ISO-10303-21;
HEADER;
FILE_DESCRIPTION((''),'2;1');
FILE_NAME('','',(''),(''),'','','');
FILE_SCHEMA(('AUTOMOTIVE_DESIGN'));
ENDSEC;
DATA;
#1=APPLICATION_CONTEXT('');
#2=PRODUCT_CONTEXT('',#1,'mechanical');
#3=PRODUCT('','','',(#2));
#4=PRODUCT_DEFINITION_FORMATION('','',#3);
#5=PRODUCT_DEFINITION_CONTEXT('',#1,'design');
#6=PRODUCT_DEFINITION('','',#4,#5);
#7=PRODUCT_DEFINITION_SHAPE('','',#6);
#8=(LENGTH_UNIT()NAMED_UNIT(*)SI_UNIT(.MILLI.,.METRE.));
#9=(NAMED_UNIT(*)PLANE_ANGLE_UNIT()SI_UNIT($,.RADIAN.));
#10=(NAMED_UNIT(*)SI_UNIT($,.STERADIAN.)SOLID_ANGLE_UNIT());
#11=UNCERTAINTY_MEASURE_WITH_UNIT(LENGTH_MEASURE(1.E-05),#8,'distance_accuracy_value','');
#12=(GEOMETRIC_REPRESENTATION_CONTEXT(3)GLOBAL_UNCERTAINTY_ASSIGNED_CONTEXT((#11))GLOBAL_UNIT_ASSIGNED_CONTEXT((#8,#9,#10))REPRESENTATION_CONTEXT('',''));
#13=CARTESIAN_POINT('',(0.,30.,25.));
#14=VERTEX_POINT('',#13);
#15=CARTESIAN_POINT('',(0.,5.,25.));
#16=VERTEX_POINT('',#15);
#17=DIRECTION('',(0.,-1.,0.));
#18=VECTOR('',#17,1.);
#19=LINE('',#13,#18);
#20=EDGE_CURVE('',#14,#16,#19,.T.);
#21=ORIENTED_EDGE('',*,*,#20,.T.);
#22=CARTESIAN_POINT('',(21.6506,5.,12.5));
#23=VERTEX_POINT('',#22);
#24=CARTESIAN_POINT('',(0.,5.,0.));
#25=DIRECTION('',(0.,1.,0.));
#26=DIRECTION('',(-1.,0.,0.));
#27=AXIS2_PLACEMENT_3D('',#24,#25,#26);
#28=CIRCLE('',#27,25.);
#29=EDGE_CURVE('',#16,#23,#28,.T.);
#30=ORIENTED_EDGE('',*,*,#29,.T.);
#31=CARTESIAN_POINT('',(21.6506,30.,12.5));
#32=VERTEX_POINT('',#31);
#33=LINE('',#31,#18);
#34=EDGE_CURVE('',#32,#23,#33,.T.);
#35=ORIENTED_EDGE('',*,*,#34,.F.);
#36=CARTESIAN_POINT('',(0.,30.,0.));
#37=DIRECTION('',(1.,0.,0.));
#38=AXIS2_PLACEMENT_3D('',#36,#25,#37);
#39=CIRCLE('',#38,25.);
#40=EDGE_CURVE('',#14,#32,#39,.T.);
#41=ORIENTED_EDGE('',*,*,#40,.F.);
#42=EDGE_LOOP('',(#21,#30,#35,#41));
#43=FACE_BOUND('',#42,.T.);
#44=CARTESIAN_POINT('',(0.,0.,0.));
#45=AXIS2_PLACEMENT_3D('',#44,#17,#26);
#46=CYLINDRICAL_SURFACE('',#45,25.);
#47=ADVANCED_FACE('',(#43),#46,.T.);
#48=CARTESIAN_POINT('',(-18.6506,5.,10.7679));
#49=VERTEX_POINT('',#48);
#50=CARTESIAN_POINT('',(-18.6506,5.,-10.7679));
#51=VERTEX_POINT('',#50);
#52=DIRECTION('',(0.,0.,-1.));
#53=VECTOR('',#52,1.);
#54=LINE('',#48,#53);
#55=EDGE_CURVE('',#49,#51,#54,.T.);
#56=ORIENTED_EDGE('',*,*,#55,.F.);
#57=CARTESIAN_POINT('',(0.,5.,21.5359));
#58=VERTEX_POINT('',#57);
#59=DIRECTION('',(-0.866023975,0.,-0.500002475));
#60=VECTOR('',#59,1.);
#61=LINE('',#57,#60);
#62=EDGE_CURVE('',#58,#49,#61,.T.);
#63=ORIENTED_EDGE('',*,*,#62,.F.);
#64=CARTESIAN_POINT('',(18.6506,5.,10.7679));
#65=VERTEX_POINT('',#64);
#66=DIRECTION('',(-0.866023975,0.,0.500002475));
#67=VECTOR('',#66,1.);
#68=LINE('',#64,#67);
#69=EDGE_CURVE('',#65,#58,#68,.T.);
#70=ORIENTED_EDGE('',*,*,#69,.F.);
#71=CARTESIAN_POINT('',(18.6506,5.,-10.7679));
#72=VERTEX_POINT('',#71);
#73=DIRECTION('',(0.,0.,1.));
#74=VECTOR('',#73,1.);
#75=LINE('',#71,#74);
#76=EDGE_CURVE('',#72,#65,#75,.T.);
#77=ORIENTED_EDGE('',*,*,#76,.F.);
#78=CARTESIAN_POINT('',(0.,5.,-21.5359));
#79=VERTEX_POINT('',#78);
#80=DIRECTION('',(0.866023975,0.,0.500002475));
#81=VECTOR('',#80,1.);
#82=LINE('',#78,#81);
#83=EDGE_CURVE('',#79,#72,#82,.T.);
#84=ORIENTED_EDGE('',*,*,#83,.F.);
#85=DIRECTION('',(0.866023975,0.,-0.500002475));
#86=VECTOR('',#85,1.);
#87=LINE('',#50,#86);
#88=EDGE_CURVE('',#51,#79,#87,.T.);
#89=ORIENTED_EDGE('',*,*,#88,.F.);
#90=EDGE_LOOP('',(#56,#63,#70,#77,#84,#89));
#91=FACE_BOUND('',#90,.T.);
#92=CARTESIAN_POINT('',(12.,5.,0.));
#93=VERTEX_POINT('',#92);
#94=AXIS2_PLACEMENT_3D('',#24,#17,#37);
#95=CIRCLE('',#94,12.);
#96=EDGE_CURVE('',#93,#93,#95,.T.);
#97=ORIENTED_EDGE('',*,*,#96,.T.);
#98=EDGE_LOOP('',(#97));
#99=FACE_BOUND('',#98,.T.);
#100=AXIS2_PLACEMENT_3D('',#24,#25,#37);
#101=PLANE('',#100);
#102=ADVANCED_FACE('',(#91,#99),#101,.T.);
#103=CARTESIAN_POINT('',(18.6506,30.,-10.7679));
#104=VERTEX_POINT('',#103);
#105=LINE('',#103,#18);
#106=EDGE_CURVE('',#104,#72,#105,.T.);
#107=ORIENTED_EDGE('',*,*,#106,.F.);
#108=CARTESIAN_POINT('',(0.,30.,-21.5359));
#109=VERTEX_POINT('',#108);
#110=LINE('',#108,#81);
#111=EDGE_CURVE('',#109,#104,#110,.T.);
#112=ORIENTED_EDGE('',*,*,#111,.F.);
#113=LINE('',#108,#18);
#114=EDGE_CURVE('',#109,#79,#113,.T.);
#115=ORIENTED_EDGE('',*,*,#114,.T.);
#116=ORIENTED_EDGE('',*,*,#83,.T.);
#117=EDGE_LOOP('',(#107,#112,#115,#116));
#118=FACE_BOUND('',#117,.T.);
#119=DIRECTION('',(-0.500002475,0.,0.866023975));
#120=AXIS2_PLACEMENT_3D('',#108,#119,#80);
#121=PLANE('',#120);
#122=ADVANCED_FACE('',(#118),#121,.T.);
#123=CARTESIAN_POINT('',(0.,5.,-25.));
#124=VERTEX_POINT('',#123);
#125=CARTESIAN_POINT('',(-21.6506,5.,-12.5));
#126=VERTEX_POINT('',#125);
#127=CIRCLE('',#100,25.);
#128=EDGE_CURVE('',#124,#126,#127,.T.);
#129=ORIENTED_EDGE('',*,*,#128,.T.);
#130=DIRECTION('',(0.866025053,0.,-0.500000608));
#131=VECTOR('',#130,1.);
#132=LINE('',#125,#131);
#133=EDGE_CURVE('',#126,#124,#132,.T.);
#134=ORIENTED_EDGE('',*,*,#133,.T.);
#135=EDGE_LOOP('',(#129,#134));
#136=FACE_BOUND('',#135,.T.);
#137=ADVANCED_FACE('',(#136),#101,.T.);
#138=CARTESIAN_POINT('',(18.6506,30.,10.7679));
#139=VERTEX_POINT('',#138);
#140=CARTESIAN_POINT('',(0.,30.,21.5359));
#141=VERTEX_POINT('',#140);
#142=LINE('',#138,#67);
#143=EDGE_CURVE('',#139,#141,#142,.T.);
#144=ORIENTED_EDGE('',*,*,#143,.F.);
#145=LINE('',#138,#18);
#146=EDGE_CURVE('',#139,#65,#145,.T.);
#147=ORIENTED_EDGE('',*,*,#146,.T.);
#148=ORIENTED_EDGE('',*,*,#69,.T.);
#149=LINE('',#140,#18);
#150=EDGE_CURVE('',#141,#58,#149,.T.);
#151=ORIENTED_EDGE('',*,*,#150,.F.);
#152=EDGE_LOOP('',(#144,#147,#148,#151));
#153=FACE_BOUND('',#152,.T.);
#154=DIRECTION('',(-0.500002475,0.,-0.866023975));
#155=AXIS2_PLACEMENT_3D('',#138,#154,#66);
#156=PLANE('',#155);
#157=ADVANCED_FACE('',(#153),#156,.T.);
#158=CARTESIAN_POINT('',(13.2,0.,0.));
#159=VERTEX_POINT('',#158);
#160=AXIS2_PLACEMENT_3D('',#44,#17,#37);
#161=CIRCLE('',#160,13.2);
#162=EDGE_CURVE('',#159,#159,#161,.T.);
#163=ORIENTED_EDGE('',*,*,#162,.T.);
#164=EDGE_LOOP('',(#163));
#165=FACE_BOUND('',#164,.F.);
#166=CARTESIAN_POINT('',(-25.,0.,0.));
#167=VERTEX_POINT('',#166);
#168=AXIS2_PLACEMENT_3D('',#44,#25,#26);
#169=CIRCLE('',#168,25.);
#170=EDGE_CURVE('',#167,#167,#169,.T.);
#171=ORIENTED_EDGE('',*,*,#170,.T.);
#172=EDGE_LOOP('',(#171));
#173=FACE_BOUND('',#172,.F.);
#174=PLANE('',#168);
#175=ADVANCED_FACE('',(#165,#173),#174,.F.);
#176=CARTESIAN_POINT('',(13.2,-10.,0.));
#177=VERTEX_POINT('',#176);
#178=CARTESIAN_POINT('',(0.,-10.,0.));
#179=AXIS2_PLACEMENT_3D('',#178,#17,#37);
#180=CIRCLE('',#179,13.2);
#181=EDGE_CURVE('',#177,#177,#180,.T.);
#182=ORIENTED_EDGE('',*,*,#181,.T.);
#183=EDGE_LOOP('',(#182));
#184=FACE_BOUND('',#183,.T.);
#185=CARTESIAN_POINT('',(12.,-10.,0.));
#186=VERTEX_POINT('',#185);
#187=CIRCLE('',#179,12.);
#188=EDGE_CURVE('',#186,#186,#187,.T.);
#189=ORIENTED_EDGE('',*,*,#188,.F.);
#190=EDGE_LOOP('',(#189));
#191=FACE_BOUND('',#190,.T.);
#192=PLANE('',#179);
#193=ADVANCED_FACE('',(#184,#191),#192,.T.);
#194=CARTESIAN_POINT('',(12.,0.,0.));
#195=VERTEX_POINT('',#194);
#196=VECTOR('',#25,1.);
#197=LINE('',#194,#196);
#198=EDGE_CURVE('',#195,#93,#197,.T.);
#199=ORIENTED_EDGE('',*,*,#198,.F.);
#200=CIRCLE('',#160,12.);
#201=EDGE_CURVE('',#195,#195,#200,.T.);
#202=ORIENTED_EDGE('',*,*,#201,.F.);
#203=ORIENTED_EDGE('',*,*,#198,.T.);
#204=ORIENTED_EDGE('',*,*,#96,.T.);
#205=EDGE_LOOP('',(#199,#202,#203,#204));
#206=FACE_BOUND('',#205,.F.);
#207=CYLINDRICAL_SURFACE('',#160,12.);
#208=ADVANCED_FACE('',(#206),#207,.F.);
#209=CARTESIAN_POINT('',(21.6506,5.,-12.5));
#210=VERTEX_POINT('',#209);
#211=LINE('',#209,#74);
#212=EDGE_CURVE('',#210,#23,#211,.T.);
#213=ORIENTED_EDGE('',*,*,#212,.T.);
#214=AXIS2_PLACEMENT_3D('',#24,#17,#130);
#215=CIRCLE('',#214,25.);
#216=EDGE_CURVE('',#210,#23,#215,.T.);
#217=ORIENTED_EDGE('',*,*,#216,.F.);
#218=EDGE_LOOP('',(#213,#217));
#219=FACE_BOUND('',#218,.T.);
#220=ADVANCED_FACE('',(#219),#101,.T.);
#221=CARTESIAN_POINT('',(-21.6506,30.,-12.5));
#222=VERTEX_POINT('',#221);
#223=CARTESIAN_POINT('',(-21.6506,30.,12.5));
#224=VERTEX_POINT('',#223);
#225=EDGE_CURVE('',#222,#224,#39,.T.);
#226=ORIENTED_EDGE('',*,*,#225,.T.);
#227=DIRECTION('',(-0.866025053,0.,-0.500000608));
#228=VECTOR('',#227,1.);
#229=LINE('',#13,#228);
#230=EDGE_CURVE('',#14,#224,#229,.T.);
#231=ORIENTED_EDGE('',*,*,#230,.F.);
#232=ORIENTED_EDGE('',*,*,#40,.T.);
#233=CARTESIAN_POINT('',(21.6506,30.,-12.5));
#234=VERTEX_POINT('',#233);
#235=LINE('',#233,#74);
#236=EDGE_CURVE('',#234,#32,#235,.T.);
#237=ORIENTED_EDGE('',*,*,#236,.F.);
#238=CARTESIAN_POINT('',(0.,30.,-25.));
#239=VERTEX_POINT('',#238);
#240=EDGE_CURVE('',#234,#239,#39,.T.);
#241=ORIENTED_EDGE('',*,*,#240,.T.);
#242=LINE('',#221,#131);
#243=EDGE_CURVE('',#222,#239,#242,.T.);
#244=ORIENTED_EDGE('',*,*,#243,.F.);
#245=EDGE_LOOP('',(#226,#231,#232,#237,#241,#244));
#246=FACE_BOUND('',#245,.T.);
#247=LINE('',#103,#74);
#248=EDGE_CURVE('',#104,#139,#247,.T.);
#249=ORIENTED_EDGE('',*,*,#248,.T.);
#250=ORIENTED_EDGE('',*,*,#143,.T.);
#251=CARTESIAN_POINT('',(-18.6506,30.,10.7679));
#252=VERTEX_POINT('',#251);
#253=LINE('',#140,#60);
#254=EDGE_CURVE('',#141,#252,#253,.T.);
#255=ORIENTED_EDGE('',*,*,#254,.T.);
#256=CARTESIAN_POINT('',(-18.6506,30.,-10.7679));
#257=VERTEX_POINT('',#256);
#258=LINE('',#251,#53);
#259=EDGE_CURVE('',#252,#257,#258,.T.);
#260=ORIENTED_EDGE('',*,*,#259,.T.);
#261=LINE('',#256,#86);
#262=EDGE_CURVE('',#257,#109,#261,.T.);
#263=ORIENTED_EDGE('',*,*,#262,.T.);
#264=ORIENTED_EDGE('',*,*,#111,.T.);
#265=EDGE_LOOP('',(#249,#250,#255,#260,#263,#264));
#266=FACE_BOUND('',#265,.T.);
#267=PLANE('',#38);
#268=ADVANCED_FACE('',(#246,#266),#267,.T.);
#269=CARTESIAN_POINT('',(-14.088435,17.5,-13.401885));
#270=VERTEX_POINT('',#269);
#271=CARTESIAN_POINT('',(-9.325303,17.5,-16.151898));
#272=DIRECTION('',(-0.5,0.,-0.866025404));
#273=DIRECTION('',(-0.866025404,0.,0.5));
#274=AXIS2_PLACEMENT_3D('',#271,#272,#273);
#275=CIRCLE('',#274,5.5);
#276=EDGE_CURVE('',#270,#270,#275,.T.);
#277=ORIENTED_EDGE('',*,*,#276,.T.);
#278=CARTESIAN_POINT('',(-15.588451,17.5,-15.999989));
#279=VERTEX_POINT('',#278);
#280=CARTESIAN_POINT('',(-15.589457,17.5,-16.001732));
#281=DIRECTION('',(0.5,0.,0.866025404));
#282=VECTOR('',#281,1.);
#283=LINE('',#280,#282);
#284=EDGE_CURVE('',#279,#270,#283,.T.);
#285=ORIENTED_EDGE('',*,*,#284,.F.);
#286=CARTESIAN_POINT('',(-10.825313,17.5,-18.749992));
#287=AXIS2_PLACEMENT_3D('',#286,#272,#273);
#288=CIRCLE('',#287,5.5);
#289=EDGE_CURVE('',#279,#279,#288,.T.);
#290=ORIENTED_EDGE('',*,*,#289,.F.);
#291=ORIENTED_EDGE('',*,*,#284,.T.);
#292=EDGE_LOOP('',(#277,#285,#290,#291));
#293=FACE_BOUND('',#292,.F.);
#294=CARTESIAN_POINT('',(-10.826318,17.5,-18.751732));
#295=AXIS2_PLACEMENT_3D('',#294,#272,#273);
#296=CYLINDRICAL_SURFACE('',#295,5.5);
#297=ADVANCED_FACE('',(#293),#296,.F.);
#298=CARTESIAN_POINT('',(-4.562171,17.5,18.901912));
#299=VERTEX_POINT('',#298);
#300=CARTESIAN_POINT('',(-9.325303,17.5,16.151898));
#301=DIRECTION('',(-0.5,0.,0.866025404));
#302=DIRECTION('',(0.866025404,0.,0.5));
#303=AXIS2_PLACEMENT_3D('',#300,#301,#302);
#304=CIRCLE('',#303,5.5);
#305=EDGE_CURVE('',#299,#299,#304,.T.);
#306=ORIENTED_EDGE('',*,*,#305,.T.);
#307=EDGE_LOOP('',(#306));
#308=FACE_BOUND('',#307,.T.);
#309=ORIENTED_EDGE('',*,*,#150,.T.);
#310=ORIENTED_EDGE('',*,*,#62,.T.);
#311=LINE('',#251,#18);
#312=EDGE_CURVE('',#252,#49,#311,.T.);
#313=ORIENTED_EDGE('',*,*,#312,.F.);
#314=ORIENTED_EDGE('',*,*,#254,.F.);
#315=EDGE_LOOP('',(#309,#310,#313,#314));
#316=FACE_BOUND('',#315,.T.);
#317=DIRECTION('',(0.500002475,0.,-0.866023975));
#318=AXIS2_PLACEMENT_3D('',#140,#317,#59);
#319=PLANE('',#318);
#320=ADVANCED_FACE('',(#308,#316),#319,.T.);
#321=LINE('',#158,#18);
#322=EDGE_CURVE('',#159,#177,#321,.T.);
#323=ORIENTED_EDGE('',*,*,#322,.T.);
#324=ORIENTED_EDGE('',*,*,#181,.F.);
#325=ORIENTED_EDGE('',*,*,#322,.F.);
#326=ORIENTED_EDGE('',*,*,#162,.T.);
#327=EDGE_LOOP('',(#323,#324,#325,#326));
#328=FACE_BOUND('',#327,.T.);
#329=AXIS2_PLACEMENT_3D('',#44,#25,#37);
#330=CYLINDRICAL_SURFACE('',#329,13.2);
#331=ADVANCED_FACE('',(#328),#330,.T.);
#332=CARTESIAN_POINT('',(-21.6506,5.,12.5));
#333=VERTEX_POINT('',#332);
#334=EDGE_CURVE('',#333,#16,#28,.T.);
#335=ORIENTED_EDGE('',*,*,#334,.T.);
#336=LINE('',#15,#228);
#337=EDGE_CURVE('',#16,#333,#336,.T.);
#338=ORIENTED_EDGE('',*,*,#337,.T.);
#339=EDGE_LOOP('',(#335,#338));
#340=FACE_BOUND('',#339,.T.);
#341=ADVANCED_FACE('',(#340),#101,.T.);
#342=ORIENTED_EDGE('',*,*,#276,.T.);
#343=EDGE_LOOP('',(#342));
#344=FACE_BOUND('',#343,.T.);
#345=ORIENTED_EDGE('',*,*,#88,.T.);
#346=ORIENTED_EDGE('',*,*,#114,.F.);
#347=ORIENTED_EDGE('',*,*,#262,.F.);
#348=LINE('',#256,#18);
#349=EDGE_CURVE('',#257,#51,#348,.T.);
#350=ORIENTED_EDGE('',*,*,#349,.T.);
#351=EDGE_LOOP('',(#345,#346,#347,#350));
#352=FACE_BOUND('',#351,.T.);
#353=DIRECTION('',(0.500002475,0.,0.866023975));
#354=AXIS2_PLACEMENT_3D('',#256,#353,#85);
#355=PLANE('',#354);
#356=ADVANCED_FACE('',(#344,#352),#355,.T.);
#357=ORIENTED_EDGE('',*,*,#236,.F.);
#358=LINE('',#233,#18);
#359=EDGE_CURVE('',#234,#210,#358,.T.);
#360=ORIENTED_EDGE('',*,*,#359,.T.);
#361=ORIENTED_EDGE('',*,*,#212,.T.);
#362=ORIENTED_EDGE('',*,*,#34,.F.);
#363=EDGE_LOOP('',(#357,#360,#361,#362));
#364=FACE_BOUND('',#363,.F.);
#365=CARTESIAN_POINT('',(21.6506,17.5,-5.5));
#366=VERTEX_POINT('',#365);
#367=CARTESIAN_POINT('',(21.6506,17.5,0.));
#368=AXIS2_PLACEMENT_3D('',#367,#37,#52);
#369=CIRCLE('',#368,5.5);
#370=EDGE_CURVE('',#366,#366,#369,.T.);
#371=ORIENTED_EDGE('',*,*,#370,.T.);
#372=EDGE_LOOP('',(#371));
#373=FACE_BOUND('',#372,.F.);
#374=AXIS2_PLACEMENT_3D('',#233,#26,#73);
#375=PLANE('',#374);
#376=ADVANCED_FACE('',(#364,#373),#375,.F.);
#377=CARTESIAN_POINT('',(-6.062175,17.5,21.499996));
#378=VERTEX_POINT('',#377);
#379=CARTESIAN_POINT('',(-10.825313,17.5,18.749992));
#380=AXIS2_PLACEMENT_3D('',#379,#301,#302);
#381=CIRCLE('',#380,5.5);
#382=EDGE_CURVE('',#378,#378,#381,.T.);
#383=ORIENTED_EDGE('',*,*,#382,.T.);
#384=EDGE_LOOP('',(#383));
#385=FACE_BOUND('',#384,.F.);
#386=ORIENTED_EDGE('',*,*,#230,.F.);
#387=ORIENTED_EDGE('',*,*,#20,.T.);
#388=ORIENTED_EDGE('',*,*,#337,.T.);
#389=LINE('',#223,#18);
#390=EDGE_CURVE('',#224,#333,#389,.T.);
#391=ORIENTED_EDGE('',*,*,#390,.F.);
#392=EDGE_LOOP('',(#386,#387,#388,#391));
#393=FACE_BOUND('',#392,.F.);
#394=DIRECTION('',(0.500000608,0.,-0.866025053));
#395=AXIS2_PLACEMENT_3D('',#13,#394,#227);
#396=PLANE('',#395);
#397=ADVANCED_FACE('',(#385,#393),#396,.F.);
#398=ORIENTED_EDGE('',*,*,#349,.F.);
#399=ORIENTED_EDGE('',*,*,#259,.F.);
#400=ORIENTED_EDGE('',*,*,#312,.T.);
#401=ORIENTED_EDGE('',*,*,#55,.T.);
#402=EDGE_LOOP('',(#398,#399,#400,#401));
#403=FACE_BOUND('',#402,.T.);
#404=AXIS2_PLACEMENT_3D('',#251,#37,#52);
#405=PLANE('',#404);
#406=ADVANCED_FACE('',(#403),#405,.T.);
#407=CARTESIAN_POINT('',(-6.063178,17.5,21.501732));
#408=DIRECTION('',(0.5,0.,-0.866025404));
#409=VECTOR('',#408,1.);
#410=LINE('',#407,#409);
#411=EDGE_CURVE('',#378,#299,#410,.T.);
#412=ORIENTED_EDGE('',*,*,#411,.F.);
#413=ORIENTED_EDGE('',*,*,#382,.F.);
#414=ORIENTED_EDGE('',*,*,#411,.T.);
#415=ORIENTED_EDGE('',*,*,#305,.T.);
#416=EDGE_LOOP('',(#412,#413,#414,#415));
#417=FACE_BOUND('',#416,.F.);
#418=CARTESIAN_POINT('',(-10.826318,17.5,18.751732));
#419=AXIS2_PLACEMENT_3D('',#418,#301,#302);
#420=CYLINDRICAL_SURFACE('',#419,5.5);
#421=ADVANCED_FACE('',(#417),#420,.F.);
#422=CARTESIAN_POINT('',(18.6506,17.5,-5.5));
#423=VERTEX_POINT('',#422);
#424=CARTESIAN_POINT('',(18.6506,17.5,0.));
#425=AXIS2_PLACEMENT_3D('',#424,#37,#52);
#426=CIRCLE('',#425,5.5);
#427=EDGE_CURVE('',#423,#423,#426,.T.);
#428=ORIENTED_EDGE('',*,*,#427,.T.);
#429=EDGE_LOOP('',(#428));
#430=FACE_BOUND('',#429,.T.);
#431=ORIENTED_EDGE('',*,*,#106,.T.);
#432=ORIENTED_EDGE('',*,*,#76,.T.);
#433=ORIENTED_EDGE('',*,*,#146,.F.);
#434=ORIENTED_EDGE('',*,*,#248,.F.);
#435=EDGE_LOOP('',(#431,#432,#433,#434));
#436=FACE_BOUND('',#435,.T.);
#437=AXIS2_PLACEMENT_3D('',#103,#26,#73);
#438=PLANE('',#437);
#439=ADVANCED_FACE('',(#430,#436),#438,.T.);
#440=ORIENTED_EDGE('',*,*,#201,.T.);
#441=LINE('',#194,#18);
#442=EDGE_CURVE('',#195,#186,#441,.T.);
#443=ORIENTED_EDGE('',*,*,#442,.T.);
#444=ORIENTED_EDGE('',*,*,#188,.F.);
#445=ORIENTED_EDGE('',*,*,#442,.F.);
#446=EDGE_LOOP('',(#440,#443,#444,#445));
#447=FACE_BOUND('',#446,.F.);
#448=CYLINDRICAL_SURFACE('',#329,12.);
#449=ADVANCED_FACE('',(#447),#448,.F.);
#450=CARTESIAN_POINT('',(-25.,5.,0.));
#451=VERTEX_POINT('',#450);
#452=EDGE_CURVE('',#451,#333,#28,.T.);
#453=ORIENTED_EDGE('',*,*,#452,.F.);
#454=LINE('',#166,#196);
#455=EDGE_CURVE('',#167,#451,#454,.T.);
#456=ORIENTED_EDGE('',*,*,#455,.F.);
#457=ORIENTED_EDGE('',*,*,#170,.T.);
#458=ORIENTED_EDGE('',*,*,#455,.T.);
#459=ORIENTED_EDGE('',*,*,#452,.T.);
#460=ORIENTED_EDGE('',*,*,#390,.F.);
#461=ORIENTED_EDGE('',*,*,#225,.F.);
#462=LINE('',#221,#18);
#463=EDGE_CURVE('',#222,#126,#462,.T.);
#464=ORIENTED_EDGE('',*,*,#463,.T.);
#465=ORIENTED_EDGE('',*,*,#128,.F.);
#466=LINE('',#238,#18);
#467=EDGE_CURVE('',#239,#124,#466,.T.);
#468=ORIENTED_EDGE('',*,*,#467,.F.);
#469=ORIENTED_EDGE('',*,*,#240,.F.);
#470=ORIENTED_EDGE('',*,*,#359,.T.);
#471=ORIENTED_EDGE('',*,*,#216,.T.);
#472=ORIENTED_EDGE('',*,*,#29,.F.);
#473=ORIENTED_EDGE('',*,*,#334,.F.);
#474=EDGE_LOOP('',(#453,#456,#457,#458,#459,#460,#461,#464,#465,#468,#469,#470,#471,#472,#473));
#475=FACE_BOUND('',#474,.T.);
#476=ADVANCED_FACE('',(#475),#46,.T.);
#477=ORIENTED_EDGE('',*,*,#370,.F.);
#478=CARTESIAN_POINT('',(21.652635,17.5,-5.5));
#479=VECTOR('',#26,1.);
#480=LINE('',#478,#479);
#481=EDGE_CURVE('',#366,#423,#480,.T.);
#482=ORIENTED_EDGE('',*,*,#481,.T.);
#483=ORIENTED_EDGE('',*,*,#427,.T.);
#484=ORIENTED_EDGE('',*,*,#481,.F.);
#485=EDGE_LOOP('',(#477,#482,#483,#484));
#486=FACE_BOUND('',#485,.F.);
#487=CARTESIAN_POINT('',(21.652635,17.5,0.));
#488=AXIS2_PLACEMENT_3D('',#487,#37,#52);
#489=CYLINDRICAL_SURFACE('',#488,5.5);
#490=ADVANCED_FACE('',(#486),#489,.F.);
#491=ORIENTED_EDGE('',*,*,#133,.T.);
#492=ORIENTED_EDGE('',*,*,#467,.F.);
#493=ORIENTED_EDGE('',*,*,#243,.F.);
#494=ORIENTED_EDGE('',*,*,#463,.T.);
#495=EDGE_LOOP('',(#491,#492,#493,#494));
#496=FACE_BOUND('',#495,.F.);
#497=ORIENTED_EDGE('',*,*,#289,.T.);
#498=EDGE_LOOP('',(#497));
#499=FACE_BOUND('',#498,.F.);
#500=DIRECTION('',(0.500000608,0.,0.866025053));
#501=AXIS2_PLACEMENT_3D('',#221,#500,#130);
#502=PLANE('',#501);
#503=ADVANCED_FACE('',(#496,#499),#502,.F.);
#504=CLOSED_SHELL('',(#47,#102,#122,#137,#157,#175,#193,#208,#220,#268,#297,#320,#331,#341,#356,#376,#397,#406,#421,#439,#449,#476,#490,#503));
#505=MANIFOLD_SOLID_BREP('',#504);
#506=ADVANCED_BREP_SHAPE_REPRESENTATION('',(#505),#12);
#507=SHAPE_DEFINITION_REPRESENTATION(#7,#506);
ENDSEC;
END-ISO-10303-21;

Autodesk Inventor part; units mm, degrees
ref_plane "YZ Plane" through (0, 0, 0) normal (1, 0, 0) x (0, 1, 0)
ref_plane "XZ Plane" through (0, 0, 0) normal (0, 1, 0) x (-1, 0, 0)
ref_plane "XY Plane" through (0, 0, 0) normal (0, 0, 1) x (1, 0, 0)
sketch "Sketch1" plane through (0, 0, 0) normal (0, 1, 0) x (-1, 0, 0)
  circle A0 centre (0, 0) radius 25
  dimension "d0" = 50
extrude "Extrusion1" add sketch "Sketch1" along normal blind 5
sketch "Sketch2" plane through (0, 5, 0) normal (0, 1, 0) x (1, 0, 0)
  circle A0 centre (0, 0) radius 25
extrude "Extrusion2" add sketch "Sketch2" along normal blind 25
sketch "Sketch3" plane through (0, 30, 0) normal (0, 1, 0) x (1, 0, 0)
  circle A0 centre (0, 0) radius 25 projected
  line L0 (0, 25) -> (21.6506, 12.5)
  line L1 (21.6506, 12.5) -> (21.6506, -12.5)
  line L2 (21.6506, -12.5) -> (0, -25)
  line L3 (0, -25) -> (-21.6506, -12.5)
  line L4 (-21.6506, -12.5) -> (-21.6506, 12.5)
  line L5 (-21.6506, 12.5) -> (0, 25)
  point P0 (0, -25)
extrude "Extrusion3" cut sketch "Sketch3" against normal blind 25 contours A0 L1 | L5 A0 | A0 L3
sketch "Sketch4" plane through (0, 30, 0) normal (0, 1, 0) x (1, 0, 0)
  arc A0 (-21.6506, 12.5) -> (-21.6506, -12.5) centre (0, 0) ccw projected
  line L0 (-21.6506, 12.5) -> (0, 25)
  line L1 (0, 25) -> (21.6506, 12.5)
  line L2 (21.6506, 12.5) -> (21.6506, -12.5)
  line L3 (21.6506, -12.5) -> (0, -25)
  line L4 (0, -25) -> (-21.6506, -12.5)
  line L5 (-21.6506, -12.5) -> (-21.6506, 12.5)
  circle A1 centre (0, 0) radius 25 projected
  line L6 (-18.6506, 10.7679) -> (0, 21.5359)
  line L7 (0, 21.5359) -> (18.6506, 10.7679)
  line L8 (18.6506, 10.7679) -> (18.6506, -10.7679)
  line L9 (18.6506, -10.7679) -> (0, -21.5359)
  line L10 (0, -21.5359) -> (-18.6506, -10.7679)
  line L11 (-18.6506, -10.7679) -> (-18.6506, 10.7679)
  dimension "d7" = 3
extrude "Extrusion4" cut sketch "Sketch4" against normal blind 25 contours L6 L7 L8 L9 L10 L11
sketch "Sketch5" plane through (0, 5, -25) normal (-0.5, 0, -0.8660254) x (-0.8660254, 0, 0.5)
  circle A0 centre (12.5, 12.5) radius 5.5
  line L0 (0, 0) -> (0, 25) projected
  line L1 (0, 0) -> (25, 0) projected
  line L2 (0, 25) -> (25, 25) projected
  line L3 (25, 25) -> (25, 0) projected
  point P0 (12.5, -5)
  point P1 (25, 12.5)
  dimension "d10" = 11
  dimension "d11" = 12.5
  dimension "d12" = 12.5
  dimension "d13" = 12.5
  dimension "d14" = 12.5
extrude "Extrusion5" cut sketch "Sketch5" against normal blind 25 contours A0
pattern_circular "Circular Pattern1" count 3 over 360 about axis through (0, 0, 0) along (0, 1, 0) of "Extrusion5"
sketch "Sketch6" plane through (0, 0, 0) normal (0, -1, 0) x (1, 0, 0)
  circle A0 centre (0, 0) radius 12
  circle A1 centre (0, 0) radius 13.2
  dimension "d20" = 24
  dimension "d21" = 26.4
extrude "Extrusion6" add sketch "Sketch6" along normal blind 10
sketch "Sketch7" plane through (0, 0, 0) normal (0, -1, 0) x (1, 0, 0)
  circle A0 centre (0, 0) radius 12 projected
extrude "Extrusion7" cut sketch "Sketch7" against normal blind 10
properties part number "spojkaV2"
